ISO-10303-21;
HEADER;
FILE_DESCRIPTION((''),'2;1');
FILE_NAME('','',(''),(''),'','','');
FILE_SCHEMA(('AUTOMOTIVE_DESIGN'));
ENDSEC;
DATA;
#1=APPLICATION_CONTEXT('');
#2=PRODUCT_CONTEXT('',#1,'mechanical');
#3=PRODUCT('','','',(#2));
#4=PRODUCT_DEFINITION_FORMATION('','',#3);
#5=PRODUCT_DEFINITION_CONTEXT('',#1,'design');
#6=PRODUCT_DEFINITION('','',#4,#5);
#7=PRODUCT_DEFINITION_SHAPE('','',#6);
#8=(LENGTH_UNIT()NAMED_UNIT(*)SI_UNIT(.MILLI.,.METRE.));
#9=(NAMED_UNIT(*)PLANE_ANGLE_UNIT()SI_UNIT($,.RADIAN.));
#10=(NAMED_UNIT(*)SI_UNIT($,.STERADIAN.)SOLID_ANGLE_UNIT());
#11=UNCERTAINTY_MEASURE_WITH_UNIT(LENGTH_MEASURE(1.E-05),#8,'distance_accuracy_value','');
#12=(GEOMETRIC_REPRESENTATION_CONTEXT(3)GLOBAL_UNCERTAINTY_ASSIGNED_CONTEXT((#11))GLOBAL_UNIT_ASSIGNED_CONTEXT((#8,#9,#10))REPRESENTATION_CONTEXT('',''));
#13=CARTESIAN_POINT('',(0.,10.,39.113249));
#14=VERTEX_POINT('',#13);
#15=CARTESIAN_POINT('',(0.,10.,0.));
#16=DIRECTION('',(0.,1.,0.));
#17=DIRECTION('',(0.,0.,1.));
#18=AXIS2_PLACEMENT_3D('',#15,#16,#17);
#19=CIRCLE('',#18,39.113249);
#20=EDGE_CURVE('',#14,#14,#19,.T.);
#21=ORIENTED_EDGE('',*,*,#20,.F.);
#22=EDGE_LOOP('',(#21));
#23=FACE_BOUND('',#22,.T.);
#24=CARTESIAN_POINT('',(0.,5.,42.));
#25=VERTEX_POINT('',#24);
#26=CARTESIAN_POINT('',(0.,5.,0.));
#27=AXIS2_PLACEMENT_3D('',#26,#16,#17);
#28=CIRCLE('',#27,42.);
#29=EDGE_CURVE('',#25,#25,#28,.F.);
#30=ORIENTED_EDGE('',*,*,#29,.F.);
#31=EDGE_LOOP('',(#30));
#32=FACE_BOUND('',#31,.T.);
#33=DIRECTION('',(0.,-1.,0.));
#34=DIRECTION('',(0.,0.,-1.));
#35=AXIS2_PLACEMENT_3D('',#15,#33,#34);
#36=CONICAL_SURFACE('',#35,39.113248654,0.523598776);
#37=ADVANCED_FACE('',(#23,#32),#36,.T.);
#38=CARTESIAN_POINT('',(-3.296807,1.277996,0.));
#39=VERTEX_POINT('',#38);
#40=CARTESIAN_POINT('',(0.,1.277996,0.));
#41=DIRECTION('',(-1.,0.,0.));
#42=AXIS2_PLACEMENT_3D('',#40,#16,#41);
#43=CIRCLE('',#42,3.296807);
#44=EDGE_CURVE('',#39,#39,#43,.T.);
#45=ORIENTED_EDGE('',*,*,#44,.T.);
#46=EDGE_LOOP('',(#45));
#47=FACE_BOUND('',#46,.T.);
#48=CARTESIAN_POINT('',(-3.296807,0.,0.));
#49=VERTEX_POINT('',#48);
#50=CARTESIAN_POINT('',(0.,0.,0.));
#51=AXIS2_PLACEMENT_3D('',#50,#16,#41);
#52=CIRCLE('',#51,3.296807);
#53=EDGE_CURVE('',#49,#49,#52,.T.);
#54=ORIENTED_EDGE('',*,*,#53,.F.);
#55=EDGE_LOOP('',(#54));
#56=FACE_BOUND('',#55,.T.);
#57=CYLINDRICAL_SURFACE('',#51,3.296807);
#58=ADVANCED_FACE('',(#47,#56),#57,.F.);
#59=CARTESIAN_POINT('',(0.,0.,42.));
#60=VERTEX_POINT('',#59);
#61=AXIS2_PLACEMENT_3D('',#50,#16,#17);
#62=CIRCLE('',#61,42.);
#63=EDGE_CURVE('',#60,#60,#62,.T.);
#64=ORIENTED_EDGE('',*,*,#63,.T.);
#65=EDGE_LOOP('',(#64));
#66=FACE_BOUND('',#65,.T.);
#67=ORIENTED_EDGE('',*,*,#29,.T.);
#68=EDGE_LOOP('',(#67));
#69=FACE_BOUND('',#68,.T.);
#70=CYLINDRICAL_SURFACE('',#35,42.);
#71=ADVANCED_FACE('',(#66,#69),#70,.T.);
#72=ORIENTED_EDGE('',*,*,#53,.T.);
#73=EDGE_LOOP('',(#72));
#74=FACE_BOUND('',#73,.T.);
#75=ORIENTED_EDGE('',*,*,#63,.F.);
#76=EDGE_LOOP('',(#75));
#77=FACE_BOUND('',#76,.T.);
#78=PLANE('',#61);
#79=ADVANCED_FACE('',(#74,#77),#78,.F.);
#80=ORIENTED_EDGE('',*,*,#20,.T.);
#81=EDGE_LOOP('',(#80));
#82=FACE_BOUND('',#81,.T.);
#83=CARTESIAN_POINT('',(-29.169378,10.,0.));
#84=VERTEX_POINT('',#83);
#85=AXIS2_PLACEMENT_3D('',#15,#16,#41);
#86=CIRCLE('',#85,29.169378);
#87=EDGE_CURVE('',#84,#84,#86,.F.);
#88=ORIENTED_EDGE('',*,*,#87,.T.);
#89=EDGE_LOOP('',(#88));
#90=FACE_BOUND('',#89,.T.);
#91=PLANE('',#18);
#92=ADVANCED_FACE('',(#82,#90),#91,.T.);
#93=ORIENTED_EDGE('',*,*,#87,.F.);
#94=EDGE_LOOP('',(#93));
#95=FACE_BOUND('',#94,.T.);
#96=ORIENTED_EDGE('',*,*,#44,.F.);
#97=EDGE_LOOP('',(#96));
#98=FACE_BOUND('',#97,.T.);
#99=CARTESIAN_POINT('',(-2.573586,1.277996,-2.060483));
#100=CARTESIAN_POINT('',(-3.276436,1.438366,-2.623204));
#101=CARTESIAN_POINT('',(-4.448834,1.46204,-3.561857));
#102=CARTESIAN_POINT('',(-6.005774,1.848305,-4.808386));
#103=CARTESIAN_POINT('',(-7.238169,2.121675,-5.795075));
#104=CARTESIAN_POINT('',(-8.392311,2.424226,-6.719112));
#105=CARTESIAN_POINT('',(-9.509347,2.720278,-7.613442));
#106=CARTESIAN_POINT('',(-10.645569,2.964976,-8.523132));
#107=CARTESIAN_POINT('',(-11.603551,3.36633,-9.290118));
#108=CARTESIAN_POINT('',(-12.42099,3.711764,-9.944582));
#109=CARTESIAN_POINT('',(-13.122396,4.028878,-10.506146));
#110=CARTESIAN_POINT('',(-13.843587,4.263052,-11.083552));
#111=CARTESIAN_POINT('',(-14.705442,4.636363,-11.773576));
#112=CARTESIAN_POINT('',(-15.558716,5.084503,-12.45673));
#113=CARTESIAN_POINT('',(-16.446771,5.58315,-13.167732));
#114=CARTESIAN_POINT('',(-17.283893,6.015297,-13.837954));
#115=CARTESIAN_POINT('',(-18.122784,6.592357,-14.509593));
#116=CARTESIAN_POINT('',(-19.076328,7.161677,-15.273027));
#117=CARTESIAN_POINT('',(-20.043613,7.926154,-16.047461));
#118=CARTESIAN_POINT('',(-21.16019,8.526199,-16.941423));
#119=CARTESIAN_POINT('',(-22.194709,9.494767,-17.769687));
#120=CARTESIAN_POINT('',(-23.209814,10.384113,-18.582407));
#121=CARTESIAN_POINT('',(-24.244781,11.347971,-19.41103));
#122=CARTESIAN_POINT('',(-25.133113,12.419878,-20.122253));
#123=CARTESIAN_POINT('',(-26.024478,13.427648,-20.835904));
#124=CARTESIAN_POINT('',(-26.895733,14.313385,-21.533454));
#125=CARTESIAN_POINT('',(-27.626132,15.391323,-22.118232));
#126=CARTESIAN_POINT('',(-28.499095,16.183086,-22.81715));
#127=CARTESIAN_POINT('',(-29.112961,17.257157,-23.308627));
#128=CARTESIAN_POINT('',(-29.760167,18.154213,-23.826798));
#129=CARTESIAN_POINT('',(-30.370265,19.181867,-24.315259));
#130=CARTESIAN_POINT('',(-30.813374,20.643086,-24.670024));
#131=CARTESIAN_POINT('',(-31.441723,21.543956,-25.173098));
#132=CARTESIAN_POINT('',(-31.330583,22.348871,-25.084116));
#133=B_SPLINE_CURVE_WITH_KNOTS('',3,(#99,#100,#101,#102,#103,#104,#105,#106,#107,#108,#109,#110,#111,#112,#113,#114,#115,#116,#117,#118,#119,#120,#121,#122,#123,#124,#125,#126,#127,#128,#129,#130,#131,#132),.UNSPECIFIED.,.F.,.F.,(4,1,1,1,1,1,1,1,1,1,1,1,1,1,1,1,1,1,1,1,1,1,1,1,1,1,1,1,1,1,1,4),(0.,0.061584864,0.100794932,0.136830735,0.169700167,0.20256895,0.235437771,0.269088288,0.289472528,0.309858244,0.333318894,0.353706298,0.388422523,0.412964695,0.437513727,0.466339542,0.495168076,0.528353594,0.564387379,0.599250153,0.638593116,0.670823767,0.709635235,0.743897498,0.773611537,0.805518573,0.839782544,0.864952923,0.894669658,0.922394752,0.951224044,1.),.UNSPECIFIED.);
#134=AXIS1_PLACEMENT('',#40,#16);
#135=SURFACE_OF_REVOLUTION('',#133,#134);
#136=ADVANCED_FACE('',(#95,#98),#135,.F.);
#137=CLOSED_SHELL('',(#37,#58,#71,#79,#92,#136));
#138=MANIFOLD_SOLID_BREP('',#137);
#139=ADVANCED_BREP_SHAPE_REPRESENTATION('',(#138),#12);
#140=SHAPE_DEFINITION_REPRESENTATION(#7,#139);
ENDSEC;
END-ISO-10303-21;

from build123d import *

# Parameters (mm, degrees)
SKETCH1_R           = 42
BOSS_EXTRUDE1_DEPTH = 10
CAVITY1_OUTLINE_W   = 3.296807109
CAVITY1_OUTLINE_H   = 8.722003862
SKETCH2_R           = 3.296807109
CUT_EXTRUDE1_DEPTH  = 61.033934998
CHAMFER1_SIZE       = 5
CHAMFER1_SIZE2      = 2.886751346


# Read off the part's stored shape, not the designer's step: Cavity1
with BuildPart() as part:
    # Sketch1 → Boss-Extrude1 (new body)
    with BuildSketch(Plane(origin=(0, 0, 0), x_dir=(1, 0, 0), z_dir=(0, 1, 0))):
        with Locations(Location((0, 0, 0), (0, 0, 270))):
            Circle(SKETCH1_R)
    extrude(amount=BOSS_EXTRUDE1_DEPTH)

    # Cavity1 outline → Cavity1 (revolve, cut)
    with BuildSketch(Plane.XY):
        with BuildLine():
            Line((3.296807109, 10.0000001), (3.296807109, 1.277996238))
            add(Edge.make_bspline(
                [(3.296807109, 1.277996238), (4.197169621, 1.438365635), (5.69903079, 1.462039555), (7.693496911, 1.848305194), (9.272215478, 2.121674562), (10.750690756, 2.424226191), (12.181632664, 2.720278367), (13.637151846, 2.964975868), (14.864343001, 3.366330129), (15.911496119, 3.711763684), (16.810008215, 4.028877941), (17.733867067, 4.263051977), (18.837916963, 4.636362632), (19.930975123, 5.084503164), (21.068588771, 5.583149701), (22.140955467, 6.015297), (23.215588995, 6.59235717), (24.437095613, 7.161677421), (25.676203543, 7.926154231), (27.106557761, 8.526198992), (28.218828126, 9.339118125), (28.906345613, 9.816936011), (29.169378211, 10)],
                knots=[0, 0, 0, 0, 0.061584864, 0.100794932, 0.136830735, 0.169700167, 0.20256895, 0.235437771, 0.269088288, 0.289472528, 0.309858244, 0.333318894, 0.353706298, 0.388422523, 0.412964695, 0.437513727, 0.466339542, 0.495168076, 0.528353594, 0.564387379, 0.599250153, 0.620877664, 0.620877664, 0.620877664, 0.620877664], degree=3))
            Line((29.169378211, 10), (3.296807109, 10.0000001))
        make_face()
        with Locations((1.648403555, 5.638998169)):
            Rectangle(CAVITY1_OUTLINE_W, CAVITY1_OUTLINE_H)
    revolve(axis=Axis((0, 0, 0), (0, 1, 0)), mode=Mode.SUBTRACT)

    # Sketch2 → Cut-Extrude1 (cut, through all)
    with BuildSketch(Plane(origin=(0, 1.277996238, 0), x_dir=(1, 0, 0), z_dir=(0, 1, 0))):
        with Locations(Location((0, 0, 0), (0, 0, 180))):
            Circle(SKETCH2_R)
    extrude(amount=-CUT_EXTRUDE1_DEPTH, mode=Mode.SUBTRACT)

    # Chamfer1
    chamfer1_edges = [part.edges().sort_by_distance(p)[0] for p in [
        (0, 10, -42),
    ]]
    chamfer1_side = [part.faces().sort_by_distance(p)[0] for p in [
        (0, 5, -42),
    ]]
    chamfer(chamfer1_edges, length=CHAMFER1_SIZE, length2=CHAMFER1_SIZE2, reference=chamfer1_side[0])


solid = part.part
